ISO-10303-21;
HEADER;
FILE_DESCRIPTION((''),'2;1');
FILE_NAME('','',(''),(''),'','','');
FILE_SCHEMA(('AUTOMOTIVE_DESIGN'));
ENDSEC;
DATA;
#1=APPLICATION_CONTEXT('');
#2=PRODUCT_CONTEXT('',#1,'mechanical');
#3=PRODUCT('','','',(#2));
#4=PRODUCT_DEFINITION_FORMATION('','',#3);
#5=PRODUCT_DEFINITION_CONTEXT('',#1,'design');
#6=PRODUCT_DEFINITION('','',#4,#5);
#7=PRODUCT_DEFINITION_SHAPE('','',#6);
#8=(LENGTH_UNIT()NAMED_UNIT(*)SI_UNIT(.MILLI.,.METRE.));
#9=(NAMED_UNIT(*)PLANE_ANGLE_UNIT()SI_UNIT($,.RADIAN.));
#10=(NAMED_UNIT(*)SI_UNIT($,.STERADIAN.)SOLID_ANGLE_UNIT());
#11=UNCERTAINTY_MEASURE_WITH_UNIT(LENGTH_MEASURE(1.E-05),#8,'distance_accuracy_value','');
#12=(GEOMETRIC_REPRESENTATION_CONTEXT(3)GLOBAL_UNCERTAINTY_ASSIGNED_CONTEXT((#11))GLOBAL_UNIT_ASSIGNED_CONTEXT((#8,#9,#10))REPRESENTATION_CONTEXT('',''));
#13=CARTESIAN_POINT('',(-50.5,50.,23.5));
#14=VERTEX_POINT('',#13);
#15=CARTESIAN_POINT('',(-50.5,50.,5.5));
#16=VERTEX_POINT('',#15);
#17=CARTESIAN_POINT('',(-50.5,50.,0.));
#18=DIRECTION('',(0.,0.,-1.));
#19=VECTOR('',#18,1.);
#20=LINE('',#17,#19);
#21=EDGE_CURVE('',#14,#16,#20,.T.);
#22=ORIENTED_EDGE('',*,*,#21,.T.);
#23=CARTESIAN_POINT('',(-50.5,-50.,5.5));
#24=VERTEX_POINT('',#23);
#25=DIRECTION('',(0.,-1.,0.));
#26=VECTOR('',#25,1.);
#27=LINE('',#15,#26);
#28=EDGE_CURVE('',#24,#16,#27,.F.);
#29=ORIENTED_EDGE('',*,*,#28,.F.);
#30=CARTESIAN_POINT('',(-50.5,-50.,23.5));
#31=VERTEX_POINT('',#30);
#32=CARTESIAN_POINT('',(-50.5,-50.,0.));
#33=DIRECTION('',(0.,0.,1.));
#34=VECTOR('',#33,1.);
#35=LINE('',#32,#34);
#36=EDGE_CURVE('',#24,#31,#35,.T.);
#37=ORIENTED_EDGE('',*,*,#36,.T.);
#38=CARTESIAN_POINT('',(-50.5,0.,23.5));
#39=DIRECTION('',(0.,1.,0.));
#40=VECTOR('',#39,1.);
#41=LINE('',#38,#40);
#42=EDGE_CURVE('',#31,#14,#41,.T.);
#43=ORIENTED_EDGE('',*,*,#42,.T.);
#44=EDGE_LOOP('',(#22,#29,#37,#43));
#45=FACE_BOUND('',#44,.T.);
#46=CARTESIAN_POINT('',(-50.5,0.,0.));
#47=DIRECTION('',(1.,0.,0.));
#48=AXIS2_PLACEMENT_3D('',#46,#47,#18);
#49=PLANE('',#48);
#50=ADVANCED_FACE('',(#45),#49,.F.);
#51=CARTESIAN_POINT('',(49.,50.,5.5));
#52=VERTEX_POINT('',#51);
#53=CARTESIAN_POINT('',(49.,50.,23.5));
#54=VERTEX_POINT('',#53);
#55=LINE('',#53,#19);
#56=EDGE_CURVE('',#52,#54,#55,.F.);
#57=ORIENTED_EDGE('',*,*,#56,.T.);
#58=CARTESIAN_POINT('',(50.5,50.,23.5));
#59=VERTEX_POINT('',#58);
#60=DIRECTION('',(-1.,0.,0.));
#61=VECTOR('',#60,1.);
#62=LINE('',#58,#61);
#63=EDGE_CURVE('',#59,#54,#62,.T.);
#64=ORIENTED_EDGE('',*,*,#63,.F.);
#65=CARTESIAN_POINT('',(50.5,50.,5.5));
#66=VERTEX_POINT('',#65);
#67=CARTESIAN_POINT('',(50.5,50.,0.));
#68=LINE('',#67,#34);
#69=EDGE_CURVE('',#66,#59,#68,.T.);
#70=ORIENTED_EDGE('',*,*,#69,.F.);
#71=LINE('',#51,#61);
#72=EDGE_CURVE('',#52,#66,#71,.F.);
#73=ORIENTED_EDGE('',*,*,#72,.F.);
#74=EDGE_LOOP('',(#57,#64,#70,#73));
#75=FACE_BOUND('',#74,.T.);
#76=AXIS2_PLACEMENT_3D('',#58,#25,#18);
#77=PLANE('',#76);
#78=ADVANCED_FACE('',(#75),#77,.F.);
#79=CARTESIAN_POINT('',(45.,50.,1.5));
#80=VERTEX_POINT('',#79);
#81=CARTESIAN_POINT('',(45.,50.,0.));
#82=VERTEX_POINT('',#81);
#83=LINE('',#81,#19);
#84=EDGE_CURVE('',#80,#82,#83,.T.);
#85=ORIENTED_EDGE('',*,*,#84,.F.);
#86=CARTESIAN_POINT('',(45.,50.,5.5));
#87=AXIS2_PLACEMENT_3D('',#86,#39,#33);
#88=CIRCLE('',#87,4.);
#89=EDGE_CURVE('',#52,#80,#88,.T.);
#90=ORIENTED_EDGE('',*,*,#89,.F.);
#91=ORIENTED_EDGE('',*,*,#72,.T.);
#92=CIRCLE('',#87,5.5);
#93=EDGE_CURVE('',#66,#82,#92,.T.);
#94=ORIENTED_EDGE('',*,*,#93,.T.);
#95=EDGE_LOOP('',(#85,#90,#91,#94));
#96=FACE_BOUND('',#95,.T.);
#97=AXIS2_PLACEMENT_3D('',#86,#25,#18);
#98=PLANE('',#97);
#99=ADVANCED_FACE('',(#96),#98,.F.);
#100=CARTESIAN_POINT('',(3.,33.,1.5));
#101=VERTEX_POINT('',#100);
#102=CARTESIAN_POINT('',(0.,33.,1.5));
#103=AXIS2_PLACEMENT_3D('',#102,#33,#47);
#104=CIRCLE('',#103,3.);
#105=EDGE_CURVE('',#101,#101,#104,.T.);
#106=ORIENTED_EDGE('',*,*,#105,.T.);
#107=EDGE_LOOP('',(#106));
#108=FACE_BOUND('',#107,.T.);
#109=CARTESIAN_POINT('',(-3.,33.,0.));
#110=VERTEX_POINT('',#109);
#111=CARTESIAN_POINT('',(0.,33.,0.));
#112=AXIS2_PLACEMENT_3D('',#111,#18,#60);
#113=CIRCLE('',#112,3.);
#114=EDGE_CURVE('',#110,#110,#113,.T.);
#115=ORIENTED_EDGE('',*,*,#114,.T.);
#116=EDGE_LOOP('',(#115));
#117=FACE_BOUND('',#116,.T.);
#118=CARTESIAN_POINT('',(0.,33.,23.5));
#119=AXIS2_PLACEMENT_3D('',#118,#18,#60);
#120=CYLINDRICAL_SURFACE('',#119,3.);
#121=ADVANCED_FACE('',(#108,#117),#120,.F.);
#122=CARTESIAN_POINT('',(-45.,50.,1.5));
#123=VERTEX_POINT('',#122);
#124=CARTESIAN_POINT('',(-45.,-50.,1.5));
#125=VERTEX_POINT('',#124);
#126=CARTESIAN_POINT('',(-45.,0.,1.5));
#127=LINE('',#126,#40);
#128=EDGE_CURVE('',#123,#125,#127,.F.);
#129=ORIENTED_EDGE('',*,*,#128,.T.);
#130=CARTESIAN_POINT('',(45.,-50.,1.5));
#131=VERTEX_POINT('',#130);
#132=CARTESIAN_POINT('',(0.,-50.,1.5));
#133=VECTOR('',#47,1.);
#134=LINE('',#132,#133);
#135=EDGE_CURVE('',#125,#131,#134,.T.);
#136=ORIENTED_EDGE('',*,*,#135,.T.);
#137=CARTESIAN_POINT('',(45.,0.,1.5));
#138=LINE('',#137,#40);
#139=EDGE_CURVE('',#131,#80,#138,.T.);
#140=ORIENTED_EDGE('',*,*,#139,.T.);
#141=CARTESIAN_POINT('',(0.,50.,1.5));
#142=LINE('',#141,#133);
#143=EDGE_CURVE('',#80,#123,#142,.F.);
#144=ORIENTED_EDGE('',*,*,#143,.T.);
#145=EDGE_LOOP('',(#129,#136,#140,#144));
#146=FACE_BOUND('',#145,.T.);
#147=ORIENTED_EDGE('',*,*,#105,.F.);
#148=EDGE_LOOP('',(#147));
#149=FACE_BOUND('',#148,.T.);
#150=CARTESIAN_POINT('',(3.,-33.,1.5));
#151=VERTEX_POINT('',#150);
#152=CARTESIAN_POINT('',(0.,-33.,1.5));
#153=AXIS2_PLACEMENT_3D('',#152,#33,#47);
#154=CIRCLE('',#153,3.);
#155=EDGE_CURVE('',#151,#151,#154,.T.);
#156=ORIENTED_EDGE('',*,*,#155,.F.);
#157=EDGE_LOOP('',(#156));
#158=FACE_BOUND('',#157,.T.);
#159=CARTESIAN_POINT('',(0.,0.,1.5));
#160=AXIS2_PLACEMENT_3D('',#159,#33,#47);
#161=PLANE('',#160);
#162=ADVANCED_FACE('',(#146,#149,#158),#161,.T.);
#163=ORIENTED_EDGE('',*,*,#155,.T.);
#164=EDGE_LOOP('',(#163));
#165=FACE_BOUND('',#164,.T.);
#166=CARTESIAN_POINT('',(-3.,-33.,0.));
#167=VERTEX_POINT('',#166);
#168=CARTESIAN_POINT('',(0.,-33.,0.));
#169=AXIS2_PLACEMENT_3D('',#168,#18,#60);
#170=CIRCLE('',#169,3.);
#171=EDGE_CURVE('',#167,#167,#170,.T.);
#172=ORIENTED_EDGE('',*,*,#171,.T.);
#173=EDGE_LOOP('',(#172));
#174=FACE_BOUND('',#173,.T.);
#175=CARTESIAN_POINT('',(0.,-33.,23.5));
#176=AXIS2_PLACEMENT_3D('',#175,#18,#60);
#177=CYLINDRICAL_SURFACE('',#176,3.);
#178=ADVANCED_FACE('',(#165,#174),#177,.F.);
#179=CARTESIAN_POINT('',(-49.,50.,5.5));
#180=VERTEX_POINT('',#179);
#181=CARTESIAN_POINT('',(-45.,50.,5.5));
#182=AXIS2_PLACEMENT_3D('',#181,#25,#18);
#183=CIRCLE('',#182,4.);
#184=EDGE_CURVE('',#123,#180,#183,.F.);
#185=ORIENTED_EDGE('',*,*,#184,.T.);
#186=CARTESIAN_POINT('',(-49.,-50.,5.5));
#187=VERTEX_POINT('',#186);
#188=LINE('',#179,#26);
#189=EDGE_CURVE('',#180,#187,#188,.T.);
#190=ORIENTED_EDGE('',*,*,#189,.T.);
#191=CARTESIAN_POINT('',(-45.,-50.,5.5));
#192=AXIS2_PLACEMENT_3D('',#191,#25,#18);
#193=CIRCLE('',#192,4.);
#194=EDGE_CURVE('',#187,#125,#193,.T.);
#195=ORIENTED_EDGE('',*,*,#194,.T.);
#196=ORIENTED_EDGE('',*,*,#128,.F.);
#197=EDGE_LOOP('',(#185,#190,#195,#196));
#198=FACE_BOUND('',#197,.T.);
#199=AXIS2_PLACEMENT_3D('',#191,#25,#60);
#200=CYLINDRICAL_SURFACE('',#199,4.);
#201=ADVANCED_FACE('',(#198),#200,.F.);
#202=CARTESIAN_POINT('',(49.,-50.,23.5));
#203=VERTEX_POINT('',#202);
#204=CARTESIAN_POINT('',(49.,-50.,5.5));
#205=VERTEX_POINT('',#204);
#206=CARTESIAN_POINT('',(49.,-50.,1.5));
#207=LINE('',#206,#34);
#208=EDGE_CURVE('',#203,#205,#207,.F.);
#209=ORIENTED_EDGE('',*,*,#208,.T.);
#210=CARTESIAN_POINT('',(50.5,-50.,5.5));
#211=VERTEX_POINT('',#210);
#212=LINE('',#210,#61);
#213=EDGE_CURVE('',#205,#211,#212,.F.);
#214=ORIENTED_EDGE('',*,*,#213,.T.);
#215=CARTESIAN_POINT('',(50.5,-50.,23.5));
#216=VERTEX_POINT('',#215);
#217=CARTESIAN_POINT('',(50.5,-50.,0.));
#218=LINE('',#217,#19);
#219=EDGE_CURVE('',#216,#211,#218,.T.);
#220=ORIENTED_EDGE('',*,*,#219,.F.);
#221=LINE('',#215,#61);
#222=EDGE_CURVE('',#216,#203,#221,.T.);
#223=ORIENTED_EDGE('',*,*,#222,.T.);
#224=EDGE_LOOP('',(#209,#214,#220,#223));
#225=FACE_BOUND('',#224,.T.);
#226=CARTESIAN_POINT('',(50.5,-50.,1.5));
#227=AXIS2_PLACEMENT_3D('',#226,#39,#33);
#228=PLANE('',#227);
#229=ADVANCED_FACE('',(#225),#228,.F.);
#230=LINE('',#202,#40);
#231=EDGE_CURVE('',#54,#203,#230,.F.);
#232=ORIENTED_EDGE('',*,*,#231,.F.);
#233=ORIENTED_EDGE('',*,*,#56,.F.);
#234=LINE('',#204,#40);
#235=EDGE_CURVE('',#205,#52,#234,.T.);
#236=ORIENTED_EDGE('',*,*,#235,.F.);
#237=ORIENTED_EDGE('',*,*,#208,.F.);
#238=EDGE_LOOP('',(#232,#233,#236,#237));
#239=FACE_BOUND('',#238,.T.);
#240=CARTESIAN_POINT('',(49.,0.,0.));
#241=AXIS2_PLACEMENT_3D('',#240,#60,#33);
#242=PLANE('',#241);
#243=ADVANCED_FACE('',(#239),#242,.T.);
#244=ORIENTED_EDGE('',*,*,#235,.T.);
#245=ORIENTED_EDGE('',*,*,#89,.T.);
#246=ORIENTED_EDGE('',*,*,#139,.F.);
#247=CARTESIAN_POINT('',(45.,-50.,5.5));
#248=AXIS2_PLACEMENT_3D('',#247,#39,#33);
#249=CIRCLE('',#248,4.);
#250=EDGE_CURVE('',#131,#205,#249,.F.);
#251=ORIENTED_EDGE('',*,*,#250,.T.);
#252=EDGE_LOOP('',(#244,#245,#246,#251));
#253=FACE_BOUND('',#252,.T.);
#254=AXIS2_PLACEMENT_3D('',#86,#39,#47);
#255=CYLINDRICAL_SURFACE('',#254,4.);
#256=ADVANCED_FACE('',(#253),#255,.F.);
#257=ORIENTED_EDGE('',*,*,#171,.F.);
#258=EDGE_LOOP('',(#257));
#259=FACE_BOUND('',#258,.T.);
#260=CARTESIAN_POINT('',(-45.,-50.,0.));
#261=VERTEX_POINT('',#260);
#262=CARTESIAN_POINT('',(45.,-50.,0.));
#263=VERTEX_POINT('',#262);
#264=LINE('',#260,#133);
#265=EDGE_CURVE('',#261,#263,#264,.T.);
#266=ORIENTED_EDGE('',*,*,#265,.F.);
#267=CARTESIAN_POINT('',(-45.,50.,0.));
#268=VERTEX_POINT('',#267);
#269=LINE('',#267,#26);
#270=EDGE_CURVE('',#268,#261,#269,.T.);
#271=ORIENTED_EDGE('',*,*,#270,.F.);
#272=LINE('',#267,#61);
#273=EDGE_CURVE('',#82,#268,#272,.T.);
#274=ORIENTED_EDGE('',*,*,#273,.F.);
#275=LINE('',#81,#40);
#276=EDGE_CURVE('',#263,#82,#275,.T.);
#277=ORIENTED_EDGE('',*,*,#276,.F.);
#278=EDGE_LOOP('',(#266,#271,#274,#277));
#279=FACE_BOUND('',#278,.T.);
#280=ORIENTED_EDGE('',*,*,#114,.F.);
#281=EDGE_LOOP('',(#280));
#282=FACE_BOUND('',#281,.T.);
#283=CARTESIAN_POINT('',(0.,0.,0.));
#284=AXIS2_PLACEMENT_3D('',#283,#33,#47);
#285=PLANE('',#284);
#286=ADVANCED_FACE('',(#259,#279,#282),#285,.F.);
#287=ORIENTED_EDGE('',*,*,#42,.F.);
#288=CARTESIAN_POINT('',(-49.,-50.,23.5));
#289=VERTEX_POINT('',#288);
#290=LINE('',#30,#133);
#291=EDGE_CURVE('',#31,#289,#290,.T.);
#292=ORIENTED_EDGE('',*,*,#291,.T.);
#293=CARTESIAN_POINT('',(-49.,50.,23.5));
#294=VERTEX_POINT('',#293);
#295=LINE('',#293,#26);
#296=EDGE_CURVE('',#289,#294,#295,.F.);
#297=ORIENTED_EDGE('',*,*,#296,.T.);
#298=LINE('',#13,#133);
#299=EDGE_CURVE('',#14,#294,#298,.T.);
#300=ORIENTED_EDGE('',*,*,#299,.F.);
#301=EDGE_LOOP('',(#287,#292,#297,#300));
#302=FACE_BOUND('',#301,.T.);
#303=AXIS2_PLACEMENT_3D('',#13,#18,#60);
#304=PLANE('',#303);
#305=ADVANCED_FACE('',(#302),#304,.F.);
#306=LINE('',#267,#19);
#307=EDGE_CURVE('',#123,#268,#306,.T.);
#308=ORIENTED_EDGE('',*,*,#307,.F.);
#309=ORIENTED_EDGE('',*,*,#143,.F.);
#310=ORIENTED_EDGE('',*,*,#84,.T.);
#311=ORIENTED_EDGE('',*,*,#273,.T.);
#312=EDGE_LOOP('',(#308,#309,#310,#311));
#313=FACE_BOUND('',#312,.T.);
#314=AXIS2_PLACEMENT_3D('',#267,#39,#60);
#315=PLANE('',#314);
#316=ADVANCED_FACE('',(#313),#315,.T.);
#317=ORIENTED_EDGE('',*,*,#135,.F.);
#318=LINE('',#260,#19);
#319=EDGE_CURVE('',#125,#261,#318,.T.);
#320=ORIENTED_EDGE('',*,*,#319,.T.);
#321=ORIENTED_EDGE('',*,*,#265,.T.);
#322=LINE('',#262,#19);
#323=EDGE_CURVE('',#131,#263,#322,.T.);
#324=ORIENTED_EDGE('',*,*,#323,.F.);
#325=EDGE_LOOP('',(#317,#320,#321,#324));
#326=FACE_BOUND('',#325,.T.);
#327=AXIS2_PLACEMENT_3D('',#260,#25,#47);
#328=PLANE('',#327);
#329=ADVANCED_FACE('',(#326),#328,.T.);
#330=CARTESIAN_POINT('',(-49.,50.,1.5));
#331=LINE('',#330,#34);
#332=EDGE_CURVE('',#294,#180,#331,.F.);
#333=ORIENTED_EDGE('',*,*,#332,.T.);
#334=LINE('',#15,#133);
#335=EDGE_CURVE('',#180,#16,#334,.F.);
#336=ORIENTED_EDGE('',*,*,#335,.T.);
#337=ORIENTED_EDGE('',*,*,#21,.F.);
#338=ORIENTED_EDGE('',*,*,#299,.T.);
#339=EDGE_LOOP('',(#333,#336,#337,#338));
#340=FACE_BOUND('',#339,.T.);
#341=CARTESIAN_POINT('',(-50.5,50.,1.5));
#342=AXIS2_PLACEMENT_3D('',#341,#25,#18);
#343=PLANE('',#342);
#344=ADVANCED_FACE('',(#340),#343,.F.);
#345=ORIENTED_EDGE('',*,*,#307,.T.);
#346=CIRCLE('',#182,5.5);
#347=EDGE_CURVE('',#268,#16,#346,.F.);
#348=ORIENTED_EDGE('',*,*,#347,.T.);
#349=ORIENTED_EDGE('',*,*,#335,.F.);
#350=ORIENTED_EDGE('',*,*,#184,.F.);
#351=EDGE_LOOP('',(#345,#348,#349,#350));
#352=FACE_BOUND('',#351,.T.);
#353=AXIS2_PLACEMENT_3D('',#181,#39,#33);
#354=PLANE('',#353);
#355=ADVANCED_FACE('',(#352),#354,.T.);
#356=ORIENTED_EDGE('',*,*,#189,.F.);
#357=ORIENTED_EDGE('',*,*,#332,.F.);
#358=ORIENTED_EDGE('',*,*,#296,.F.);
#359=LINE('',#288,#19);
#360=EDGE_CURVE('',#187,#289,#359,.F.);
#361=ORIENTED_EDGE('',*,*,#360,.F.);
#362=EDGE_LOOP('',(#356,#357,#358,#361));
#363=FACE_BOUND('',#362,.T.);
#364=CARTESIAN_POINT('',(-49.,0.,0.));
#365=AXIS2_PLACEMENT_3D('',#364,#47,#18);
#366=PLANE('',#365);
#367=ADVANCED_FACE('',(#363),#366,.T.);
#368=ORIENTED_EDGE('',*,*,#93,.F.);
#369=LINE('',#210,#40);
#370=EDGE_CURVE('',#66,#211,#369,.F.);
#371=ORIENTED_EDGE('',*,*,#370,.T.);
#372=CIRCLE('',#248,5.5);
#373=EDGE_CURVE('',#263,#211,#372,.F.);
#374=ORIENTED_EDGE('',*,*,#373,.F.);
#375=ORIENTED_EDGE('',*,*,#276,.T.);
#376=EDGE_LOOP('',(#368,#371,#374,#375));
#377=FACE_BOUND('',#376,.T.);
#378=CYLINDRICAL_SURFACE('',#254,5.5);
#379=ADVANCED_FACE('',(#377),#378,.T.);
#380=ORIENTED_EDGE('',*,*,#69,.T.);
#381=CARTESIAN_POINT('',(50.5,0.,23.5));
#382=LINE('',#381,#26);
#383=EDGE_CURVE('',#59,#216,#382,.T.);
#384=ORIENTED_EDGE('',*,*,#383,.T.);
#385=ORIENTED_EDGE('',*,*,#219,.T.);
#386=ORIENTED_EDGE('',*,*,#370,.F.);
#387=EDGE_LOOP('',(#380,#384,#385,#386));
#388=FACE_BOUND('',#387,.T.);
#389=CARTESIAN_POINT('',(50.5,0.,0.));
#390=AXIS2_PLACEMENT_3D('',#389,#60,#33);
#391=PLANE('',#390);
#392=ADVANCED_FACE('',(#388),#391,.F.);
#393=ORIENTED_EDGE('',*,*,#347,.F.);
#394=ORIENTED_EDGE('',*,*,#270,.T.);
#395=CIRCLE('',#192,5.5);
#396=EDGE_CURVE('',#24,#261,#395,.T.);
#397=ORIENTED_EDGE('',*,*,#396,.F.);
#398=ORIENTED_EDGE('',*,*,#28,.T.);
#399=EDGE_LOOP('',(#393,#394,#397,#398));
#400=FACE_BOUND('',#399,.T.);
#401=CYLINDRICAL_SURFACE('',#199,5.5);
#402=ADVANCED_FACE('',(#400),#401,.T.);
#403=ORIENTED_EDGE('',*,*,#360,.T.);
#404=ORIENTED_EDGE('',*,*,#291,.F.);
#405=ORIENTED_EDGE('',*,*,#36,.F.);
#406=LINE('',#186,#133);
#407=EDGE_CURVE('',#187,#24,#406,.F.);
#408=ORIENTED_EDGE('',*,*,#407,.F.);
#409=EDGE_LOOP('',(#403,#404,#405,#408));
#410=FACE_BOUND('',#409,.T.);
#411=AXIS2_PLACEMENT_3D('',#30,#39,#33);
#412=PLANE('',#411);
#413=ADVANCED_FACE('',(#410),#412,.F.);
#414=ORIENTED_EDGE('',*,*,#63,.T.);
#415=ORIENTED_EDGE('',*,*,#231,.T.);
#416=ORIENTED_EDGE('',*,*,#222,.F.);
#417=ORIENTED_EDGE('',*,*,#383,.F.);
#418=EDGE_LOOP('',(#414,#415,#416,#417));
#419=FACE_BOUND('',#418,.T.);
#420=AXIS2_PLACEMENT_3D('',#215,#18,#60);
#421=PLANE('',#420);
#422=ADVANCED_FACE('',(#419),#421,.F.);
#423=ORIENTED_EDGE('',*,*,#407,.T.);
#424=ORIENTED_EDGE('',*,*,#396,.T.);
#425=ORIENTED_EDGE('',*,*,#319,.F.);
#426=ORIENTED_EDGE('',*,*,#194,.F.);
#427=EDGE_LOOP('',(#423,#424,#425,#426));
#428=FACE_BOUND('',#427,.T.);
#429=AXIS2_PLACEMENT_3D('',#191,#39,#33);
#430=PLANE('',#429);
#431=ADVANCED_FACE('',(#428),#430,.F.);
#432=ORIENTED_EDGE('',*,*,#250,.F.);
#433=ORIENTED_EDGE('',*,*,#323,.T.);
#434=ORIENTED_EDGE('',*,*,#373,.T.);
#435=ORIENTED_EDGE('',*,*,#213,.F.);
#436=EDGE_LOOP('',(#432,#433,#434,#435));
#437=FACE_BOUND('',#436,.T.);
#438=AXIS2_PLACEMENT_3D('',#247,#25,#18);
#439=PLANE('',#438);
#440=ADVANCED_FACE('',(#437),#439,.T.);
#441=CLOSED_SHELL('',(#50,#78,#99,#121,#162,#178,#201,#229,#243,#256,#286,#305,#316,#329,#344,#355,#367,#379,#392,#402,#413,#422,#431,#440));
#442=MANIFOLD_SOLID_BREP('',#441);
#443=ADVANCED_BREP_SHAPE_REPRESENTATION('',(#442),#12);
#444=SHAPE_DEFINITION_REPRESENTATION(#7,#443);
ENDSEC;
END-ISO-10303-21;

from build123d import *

# Parameters (mm, degrees)
SKETCH1_W                = 90
SKETCH1_H                = 100
BOSS_EXTRUDE1_DEPTH      = 10
CONVERT_SOLID1_START     = 1.5
CONVERT_SOLID1_OUTLINE_W = 90
CONVERT_SOLID1_OUTLINE_H = 100
CONVERT_SOLID1_DEPTH     = 8.5
EDGE_FLANGE1_DEPTH       = 100
EDGE_FLANGE2_DEPTH       = 100
SKETCH12_R               = 3
CUT_EXTRUDE1_DEPTH       = 75.849849699


# Read off the part's stored shape, not the designer's step: Convert-Solid1
# Sheet-metal steps are written as plain solids
with BuildPart() as part:
    # Sketch1 → Boss-Extrude1 (new body)
    with BuildSketch(Plane.XY):
        Rectangle(SKETCH1_W, SKETCH1_H)
    extrude(amount=BOSS_EXTRUDE1_DEPTH)

    # Convert-Solid1 outline → Convert-Solid1 (cut)
    with BuildSketch(Plane.XY.offset(CONVERT_SOLID1_START)):
        Rectangle(CONVERT_SOLID1_OUTLINE_W, CONVERT_SOLID1_OUTLINE_H)
    extrude(amount=CONVERT_SOLID1_DEPTH, mode=Mode.SUBTRACT)

    # Edge-Flange1 section (across the edge) → Edge-Flange1 (add)
    with BuildSketch(Plane(origin=(-49, 50, 1.5), x_dir=(1, 0, 0), z_dir=(0, -1, 0))):
        with BuildLine():
            Line((-1.5, 4), (-1.5, 22))
            Line((-1.5, 22), (0, 22))
            Line((0, 22), (0, 4))
            ThreePointArc((0, 4), (1.171572875, 1.171572875), (4, 0))
            Line((4, 0), (4, -1.5))
            ThreePointArc((4, -1.5), (0.110912703, 0.110912703), (-1.5, 4))
        make_face()
    extrude(amount=EDGE_FLANGE1_DEPTH)

    # Edge-Flange2 section (across the edge) → Edge-Flange2 (add)
    with BuildSketch(Plane(origin=(49, -50, 1.5), x_dir=(-1, 0, 0), z_dir=(0, 1, 0))):
        with BuildLine():
            Line((-1.5, 4), (-1.5, 22))
            Line((-1.5, 22), (0, 22))
            Line((0, 22), (0, 4))
            ThreePointArc((0, 4), (1.171572875, 1.171572875), (4, 0))
            Line((4, 0), (4, -1.5))
            ThreePointArc((4, -1.5), (0.110912703, 0.110912703), (-1.5, 4))
        make_face()
    extrude(amount=EDGE_FLANGE2_DEPTH)

    # Sketch12 → Cut-Extrude1 (cut, through all)
    with BuildSketch(Plane(origin=(0, 0, 0), x_dir=(-1, 0, 0), z_dir=(0, 0, -1))):
        with Locations((0, 33)):
            Circle(SKETCH12_R)
        with Locations((0, -33)):
            Circle(SKETCH12_R)
    extrude(amount=-CUT_EXTRUDE1_DEPTH, mode=Mode.SUBTRACT)


solid = part.part
